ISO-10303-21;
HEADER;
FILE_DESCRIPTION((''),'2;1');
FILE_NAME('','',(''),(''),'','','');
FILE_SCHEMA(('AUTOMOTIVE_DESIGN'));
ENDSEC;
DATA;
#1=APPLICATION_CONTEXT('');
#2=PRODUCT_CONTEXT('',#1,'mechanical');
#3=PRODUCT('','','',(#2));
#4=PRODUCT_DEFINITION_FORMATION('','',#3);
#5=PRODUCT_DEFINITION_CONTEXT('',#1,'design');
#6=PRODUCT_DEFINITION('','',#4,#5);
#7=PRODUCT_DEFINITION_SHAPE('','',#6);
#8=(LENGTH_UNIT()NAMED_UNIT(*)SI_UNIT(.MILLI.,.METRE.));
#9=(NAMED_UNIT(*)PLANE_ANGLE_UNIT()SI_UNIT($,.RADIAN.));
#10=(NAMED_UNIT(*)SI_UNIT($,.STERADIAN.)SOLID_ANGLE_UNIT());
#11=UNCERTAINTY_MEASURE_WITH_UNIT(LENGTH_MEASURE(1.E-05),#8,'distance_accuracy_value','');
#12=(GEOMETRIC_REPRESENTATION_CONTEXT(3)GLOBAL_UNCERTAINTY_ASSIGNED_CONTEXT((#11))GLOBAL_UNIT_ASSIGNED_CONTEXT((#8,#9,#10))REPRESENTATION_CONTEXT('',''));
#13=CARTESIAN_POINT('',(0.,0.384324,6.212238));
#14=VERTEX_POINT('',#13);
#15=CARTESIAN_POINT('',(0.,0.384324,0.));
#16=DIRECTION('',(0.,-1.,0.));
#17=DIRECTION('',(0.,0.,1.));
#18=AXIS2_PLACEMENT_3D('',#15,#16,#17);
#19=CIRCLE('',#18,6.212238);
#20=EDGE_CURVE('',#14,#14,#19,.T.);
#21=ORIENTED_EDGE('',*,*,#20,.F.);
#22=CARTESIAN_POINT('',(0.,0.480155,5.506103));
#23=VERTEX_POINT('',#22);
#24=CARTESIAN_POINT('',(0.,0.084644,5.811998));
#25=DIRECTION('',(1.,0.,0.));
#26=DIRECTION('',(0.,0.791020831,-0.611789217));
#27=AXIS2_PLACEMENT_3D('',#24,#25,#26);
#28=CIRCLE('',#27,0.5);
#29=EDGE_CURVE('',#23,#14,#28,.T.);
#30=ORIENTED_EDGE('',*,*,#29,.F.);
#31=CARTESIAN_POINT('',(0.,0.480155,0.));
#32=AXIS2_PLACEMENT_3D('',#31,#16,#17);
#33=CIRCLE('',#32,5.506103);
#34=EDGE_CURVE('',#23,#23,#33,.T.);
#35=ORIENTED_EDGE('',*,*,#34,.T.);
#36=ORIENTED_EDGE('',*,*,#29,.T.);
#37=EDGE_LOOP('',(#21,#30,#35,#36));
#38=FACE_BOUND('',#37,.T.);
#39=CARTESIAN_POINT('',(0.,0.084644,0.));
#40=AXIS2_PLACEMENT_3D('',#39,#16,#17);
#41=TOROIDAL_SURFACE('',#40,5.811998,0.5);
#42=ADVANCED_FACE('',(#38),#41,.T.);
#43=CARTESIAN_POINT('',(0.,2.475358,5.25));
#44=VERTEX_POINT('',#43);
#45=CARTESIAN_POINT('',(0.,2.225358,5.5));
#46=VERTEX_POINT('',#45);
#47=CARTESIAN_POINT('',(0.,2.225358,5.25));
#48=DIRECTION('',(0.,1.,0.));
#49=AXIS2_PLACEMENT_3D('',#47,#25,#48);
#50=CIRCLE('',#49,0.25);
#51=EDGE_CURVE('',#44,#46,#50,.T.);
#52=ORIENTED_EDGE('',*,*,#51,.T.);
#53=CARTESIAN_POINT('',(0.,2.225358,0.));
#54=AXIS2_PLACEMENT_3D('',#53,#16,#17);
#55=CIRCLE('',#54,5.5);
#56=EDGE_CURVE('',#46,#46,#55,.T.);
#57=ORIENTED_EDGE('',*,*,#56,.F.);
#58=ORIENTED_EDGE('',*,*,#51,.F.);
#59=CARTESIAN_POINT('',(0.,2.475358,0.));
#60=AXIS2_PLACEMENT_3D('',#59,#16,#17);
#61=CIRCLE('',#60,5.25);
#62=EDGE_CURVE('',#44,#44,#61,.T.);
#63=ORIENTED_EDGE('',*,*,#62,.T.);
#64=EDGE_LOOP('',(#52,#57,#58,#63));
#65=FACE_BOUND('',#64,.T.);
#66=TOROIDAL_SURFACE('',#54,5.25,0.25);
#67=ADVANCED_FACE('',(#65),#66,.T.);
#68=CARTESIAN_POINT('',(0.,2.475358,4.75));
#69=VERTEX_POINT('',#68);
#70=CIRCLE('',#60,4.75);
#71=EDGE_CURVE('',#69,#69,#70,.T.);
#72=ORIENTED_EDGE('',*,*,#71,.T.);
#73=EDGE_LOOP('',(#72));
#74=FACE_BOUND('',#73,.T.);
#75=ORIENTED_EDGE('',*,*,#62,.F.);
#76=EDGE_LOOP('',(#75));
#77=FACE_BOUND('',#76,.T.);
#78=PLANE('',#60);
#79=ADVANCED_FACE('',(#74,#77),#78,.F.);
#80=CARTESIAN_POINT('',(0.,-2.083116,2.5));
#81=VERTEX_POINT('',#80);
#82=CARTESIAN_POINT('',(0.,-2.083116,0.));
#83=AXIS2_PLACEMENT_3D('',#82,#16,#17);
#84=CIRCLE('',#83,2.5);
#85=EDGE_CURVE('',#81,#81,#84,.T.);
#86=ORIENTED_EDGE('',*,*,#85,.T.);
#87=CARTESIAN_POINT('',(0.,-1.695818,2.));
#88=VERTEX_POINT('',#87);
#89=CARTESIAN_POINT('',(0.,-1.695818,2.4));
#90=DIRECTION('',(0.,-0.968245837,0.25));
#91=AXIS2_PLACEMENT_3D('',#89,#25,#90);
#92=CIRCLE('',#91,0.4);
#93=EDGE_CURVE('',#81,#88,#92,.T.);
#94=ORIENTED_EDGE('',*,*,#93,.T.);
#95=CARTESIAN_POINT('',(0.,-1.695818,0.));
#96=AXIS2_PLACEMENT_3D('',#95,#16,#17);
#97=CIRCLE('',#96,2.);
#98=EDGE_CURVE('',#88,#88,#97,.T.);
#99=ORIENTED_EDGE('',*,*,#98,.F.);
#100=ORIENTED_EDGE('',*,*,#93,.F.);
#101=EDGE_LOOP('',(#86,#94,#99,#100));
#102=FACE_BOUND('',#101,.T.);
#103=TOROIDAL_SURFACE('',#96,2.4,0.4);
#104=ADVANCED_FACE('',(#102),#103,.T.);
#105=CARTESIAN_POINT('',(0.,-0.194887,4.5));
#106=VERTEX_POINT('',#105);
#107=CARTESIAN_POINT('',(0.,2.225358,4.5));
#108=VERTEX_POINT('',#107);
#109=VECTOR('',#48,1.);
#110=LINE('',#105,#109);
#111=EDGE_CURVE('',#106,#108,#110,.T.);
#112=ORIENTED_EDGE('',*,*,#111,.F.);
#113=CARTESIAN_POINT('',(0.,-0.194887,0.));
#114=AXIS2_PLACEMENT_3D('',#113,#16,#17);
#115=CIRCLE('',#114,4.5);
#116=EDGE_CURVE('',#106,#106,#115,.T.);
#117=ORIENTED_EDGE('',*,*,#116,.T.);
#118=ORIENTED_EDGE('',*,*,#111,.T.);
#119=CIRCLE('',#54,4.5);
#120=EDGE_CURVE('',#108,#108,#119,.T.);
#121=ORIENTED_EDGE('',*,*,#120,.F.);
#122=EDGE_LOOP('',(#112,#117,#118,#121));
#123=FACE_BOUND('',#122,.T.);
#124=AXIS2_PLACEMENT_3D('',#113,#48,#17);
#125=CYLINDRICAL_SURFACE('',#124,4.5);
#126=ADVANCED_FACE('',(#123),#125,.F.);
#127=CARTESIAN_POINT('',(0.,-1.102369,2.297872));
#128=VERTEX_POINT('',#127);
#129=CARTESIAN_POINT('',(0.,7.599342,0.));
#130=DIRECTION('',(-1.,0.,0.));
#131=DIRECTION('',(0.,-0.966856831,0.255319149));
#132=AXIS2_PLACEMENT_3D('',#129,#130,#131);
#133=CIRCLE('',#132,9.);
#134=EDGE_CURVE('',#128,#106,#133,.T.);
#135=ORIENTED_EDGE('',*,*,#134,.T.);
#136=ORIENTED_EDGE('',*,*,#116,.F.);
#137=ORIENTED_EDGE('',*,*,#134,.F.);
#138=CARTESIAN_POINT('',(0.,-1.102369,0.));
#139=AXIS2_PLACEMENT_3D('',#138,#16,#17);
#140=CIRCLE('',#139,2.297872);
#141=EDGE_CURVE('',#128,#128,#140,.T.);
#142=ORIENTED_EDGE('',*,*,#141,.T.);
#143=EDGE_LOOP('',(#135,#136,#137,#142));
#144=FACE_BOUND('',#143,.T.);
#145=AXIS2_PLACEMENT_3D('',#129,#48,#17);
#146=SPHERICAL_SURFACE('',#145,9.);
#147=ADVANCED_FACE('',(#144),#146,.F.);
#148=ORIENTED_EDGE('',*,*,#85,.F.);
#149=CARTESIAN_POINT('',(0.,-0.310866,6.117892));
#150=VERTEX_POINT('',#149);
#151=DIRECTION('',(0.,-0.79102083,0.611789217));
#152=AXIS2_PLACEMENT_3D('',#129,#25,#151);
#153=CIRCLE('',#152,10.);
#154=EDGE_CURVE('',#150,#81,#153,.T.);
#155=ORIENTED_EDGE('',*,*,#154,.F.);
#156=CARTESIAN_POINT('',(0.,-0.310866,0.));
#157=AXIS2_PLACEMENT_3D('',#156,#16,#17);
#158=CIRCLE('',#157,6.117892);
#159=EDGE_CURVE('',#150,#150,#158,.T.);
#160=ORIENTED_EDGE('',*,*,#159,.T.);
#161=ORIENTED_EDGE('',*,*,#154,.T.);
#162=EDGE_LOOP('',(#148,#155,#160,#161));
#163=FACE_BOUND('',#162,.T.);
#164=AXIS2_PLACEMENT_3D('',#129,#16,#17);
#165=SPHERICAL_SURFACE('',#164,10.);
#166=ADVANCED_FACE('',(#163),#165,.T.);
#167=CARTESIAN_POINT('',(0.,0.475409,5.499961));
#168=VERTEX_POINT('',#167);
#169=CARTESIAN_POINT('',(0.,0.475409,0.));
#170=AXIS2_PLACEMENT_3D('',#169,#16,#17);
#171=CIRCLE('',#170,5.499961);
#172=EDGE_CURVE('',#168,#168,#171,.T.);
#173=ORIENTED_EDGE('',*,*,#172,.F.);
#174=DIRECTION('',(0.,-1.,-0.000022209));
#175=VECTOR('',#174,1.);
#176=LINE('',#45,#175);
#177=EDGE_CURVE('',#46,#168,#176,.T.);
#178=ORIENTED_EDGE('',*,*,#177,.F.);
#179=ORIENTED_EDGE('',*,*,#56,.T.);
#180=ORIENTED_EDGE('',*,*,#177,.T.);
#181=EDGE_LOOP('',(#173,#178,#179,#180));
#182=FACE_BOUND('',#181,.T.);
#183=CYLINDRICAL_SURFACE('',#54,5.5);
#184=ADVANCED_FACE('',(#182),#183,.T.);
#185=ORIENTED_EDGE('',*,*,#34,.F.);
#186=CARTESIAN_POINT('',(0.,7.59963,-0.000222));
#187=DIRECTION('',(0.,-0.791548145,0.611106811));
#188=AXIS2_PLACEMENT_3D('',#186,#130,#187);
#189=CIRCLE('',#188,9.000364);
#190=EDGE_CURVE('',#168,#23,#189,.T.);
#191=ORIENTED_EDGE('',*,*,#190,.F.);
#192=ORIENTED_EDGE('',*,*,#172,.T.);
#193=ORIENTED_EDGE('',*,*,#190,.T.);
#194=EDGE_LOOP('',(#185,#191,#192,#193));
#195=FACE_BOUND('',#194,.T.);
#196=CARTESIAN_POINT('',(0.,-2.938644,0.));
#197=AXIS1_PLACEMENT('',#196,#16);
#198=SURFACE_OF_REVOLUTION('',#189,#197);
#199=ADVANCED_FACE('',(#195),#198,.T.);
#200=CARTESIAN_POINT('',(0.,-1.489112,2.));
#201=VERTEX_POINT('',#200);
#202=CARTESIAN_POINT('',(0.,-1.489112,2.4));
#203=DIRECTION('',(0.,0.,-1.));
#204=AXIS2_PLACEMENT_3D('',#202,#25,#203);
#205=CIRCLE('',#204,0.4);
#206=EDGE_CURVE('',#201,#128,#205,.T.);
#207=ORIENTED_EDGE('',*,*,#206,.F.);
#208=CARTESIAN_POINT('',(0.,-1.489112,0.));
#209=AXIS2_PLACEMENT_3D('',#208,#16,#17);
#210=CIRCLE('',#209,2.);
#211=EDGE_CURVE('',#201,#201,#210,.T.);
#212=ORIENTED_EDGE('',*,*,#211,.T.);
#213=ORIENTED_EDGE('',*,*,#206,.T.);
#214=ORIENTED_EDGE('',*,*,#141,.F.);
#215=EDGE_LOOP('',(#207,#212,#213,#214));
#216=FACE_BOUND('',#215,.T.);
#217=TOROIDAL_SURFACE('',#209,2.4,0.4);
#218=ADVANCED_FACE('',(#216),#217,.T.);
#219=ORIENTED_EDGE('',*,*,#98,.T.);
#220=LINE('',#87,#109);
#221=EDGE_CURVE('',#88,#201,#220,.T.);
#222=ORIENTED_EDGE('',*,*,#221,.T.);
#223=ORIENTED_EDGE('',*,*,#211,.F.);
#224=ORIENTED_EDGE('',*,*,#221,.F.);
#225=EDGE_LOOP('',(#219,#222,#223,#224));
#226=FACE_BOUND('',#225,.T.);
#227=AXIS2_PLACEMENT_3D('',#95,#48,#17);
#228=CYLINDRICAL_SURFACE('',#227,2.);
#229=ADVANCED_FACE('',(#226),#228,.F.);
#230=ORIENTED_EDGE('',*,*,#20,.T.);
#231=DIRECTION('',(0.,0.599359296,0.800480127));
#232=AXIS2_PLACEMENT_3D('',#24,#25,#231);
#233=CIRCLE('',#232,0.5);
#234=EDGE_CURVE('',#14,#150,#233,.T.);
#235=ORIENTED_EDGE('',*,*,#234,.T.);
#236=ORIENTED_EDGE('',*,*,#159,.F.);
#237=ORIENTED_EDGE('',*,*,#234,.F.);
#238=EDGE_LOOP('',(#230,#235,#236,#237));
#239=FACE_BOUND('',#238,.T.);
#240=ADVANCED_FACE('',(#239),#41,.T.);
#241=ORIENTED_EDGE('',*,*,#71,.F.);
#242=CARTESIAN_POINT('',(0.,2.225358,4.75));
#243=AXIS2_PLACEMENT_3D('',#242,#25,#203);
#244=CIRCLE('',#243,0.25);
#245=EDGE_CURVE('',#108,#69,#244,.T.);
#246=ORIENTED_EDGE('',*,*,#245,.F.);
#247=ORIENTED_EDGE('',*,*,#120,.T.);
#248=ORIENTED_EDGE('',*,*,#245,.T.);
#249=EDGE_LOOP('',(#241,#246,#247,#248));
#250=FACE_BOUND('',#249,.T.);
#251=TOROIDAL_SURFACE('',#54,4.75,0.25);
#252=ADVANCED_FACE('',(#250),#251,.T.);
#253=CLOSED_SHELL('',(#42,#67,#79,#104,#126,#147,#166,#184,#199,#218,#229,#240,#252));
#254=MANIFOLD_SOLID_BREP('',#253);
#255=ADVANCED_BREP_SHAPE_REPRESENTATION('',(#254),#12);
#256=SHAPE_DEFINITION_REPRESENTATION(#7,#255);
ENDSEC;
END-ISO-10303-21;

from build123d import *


# Not quite as in the source:
# - ends of sketch curves that miss each other by under 0.0002 mm in the source are joined


with BuildPart() as f1:
    # F0 (on Right) → F1 (revolve)
    with BuildSketch(Plane.YZ):
        with BuildLine():
            ThreePointArc((-2.0831162887, 2.5), (-2.0120457201, 2.1550510257), (-1.6958179541, 2))
            Line((-1.6958179541, 2), (-1.4891121437, 2))
            ThreePointArc((-1.4891121437, 2), (-1.2450333284, 2.0831001232), (-1.1023694112, 2.2978723405))
            ThreePointArc((-1.1023694112, 2.2978723405), (-0.7217967722, 3.4290885624), (-0.1948865645, 4.5))
            ThreePointArc((-0.1948865645, 4.5), (0.1235230232, 5.0112004142), (0.475408639, 5.4999611351))
            ThreePointArc((0.475408639, 5.4999611351), (0.4777809564, 5.5030325568), (0.4801545979, 5.5061029552))
            ThreePointArc((0.4801545979, 5.5061029552), (0.5801024047, 5.8792370625), (0.3843238308, 6.2122376272))
            ThreePointArc((0.3843238358, 6.2122376234), (0.0174046888, 6.3074557819), (-0.3108662275, 6.1178921683))
            ThreePointArc((-0.3108662275, 6.1178921683), (-1.3810680516, 4.3991174031), (-2.0831162887, 2.5))
        make_face()
        with BuildLine():
            ThreePointArc((0.475408639, 5.4999611351), (0.1235230232, 5.0112004142), (-0.1948865645, 4.5))
            Line((-0.1948865645, 4.5), (2.2253582985, 4.5))
            ThreePointArc((2.2253582985, 4.5), (2.4021349938, 4.5732233047), (2.4753582985, 4.75))
            Line((2.4753582985, 4.75), (2.4753582985, 5.25))
            ThreePointArc((2.4753582985, 5.25), (2.4021349938, 5.4267766953), (2.2253582985, 5.5))
            Line((2.2253582985, 5.5), (0.475408639, 5.4999611351))
        make_face()
    revolve(axis=Axis((0, -2.938644262, 0), (0, -1, 0)))


solid = f1.part
